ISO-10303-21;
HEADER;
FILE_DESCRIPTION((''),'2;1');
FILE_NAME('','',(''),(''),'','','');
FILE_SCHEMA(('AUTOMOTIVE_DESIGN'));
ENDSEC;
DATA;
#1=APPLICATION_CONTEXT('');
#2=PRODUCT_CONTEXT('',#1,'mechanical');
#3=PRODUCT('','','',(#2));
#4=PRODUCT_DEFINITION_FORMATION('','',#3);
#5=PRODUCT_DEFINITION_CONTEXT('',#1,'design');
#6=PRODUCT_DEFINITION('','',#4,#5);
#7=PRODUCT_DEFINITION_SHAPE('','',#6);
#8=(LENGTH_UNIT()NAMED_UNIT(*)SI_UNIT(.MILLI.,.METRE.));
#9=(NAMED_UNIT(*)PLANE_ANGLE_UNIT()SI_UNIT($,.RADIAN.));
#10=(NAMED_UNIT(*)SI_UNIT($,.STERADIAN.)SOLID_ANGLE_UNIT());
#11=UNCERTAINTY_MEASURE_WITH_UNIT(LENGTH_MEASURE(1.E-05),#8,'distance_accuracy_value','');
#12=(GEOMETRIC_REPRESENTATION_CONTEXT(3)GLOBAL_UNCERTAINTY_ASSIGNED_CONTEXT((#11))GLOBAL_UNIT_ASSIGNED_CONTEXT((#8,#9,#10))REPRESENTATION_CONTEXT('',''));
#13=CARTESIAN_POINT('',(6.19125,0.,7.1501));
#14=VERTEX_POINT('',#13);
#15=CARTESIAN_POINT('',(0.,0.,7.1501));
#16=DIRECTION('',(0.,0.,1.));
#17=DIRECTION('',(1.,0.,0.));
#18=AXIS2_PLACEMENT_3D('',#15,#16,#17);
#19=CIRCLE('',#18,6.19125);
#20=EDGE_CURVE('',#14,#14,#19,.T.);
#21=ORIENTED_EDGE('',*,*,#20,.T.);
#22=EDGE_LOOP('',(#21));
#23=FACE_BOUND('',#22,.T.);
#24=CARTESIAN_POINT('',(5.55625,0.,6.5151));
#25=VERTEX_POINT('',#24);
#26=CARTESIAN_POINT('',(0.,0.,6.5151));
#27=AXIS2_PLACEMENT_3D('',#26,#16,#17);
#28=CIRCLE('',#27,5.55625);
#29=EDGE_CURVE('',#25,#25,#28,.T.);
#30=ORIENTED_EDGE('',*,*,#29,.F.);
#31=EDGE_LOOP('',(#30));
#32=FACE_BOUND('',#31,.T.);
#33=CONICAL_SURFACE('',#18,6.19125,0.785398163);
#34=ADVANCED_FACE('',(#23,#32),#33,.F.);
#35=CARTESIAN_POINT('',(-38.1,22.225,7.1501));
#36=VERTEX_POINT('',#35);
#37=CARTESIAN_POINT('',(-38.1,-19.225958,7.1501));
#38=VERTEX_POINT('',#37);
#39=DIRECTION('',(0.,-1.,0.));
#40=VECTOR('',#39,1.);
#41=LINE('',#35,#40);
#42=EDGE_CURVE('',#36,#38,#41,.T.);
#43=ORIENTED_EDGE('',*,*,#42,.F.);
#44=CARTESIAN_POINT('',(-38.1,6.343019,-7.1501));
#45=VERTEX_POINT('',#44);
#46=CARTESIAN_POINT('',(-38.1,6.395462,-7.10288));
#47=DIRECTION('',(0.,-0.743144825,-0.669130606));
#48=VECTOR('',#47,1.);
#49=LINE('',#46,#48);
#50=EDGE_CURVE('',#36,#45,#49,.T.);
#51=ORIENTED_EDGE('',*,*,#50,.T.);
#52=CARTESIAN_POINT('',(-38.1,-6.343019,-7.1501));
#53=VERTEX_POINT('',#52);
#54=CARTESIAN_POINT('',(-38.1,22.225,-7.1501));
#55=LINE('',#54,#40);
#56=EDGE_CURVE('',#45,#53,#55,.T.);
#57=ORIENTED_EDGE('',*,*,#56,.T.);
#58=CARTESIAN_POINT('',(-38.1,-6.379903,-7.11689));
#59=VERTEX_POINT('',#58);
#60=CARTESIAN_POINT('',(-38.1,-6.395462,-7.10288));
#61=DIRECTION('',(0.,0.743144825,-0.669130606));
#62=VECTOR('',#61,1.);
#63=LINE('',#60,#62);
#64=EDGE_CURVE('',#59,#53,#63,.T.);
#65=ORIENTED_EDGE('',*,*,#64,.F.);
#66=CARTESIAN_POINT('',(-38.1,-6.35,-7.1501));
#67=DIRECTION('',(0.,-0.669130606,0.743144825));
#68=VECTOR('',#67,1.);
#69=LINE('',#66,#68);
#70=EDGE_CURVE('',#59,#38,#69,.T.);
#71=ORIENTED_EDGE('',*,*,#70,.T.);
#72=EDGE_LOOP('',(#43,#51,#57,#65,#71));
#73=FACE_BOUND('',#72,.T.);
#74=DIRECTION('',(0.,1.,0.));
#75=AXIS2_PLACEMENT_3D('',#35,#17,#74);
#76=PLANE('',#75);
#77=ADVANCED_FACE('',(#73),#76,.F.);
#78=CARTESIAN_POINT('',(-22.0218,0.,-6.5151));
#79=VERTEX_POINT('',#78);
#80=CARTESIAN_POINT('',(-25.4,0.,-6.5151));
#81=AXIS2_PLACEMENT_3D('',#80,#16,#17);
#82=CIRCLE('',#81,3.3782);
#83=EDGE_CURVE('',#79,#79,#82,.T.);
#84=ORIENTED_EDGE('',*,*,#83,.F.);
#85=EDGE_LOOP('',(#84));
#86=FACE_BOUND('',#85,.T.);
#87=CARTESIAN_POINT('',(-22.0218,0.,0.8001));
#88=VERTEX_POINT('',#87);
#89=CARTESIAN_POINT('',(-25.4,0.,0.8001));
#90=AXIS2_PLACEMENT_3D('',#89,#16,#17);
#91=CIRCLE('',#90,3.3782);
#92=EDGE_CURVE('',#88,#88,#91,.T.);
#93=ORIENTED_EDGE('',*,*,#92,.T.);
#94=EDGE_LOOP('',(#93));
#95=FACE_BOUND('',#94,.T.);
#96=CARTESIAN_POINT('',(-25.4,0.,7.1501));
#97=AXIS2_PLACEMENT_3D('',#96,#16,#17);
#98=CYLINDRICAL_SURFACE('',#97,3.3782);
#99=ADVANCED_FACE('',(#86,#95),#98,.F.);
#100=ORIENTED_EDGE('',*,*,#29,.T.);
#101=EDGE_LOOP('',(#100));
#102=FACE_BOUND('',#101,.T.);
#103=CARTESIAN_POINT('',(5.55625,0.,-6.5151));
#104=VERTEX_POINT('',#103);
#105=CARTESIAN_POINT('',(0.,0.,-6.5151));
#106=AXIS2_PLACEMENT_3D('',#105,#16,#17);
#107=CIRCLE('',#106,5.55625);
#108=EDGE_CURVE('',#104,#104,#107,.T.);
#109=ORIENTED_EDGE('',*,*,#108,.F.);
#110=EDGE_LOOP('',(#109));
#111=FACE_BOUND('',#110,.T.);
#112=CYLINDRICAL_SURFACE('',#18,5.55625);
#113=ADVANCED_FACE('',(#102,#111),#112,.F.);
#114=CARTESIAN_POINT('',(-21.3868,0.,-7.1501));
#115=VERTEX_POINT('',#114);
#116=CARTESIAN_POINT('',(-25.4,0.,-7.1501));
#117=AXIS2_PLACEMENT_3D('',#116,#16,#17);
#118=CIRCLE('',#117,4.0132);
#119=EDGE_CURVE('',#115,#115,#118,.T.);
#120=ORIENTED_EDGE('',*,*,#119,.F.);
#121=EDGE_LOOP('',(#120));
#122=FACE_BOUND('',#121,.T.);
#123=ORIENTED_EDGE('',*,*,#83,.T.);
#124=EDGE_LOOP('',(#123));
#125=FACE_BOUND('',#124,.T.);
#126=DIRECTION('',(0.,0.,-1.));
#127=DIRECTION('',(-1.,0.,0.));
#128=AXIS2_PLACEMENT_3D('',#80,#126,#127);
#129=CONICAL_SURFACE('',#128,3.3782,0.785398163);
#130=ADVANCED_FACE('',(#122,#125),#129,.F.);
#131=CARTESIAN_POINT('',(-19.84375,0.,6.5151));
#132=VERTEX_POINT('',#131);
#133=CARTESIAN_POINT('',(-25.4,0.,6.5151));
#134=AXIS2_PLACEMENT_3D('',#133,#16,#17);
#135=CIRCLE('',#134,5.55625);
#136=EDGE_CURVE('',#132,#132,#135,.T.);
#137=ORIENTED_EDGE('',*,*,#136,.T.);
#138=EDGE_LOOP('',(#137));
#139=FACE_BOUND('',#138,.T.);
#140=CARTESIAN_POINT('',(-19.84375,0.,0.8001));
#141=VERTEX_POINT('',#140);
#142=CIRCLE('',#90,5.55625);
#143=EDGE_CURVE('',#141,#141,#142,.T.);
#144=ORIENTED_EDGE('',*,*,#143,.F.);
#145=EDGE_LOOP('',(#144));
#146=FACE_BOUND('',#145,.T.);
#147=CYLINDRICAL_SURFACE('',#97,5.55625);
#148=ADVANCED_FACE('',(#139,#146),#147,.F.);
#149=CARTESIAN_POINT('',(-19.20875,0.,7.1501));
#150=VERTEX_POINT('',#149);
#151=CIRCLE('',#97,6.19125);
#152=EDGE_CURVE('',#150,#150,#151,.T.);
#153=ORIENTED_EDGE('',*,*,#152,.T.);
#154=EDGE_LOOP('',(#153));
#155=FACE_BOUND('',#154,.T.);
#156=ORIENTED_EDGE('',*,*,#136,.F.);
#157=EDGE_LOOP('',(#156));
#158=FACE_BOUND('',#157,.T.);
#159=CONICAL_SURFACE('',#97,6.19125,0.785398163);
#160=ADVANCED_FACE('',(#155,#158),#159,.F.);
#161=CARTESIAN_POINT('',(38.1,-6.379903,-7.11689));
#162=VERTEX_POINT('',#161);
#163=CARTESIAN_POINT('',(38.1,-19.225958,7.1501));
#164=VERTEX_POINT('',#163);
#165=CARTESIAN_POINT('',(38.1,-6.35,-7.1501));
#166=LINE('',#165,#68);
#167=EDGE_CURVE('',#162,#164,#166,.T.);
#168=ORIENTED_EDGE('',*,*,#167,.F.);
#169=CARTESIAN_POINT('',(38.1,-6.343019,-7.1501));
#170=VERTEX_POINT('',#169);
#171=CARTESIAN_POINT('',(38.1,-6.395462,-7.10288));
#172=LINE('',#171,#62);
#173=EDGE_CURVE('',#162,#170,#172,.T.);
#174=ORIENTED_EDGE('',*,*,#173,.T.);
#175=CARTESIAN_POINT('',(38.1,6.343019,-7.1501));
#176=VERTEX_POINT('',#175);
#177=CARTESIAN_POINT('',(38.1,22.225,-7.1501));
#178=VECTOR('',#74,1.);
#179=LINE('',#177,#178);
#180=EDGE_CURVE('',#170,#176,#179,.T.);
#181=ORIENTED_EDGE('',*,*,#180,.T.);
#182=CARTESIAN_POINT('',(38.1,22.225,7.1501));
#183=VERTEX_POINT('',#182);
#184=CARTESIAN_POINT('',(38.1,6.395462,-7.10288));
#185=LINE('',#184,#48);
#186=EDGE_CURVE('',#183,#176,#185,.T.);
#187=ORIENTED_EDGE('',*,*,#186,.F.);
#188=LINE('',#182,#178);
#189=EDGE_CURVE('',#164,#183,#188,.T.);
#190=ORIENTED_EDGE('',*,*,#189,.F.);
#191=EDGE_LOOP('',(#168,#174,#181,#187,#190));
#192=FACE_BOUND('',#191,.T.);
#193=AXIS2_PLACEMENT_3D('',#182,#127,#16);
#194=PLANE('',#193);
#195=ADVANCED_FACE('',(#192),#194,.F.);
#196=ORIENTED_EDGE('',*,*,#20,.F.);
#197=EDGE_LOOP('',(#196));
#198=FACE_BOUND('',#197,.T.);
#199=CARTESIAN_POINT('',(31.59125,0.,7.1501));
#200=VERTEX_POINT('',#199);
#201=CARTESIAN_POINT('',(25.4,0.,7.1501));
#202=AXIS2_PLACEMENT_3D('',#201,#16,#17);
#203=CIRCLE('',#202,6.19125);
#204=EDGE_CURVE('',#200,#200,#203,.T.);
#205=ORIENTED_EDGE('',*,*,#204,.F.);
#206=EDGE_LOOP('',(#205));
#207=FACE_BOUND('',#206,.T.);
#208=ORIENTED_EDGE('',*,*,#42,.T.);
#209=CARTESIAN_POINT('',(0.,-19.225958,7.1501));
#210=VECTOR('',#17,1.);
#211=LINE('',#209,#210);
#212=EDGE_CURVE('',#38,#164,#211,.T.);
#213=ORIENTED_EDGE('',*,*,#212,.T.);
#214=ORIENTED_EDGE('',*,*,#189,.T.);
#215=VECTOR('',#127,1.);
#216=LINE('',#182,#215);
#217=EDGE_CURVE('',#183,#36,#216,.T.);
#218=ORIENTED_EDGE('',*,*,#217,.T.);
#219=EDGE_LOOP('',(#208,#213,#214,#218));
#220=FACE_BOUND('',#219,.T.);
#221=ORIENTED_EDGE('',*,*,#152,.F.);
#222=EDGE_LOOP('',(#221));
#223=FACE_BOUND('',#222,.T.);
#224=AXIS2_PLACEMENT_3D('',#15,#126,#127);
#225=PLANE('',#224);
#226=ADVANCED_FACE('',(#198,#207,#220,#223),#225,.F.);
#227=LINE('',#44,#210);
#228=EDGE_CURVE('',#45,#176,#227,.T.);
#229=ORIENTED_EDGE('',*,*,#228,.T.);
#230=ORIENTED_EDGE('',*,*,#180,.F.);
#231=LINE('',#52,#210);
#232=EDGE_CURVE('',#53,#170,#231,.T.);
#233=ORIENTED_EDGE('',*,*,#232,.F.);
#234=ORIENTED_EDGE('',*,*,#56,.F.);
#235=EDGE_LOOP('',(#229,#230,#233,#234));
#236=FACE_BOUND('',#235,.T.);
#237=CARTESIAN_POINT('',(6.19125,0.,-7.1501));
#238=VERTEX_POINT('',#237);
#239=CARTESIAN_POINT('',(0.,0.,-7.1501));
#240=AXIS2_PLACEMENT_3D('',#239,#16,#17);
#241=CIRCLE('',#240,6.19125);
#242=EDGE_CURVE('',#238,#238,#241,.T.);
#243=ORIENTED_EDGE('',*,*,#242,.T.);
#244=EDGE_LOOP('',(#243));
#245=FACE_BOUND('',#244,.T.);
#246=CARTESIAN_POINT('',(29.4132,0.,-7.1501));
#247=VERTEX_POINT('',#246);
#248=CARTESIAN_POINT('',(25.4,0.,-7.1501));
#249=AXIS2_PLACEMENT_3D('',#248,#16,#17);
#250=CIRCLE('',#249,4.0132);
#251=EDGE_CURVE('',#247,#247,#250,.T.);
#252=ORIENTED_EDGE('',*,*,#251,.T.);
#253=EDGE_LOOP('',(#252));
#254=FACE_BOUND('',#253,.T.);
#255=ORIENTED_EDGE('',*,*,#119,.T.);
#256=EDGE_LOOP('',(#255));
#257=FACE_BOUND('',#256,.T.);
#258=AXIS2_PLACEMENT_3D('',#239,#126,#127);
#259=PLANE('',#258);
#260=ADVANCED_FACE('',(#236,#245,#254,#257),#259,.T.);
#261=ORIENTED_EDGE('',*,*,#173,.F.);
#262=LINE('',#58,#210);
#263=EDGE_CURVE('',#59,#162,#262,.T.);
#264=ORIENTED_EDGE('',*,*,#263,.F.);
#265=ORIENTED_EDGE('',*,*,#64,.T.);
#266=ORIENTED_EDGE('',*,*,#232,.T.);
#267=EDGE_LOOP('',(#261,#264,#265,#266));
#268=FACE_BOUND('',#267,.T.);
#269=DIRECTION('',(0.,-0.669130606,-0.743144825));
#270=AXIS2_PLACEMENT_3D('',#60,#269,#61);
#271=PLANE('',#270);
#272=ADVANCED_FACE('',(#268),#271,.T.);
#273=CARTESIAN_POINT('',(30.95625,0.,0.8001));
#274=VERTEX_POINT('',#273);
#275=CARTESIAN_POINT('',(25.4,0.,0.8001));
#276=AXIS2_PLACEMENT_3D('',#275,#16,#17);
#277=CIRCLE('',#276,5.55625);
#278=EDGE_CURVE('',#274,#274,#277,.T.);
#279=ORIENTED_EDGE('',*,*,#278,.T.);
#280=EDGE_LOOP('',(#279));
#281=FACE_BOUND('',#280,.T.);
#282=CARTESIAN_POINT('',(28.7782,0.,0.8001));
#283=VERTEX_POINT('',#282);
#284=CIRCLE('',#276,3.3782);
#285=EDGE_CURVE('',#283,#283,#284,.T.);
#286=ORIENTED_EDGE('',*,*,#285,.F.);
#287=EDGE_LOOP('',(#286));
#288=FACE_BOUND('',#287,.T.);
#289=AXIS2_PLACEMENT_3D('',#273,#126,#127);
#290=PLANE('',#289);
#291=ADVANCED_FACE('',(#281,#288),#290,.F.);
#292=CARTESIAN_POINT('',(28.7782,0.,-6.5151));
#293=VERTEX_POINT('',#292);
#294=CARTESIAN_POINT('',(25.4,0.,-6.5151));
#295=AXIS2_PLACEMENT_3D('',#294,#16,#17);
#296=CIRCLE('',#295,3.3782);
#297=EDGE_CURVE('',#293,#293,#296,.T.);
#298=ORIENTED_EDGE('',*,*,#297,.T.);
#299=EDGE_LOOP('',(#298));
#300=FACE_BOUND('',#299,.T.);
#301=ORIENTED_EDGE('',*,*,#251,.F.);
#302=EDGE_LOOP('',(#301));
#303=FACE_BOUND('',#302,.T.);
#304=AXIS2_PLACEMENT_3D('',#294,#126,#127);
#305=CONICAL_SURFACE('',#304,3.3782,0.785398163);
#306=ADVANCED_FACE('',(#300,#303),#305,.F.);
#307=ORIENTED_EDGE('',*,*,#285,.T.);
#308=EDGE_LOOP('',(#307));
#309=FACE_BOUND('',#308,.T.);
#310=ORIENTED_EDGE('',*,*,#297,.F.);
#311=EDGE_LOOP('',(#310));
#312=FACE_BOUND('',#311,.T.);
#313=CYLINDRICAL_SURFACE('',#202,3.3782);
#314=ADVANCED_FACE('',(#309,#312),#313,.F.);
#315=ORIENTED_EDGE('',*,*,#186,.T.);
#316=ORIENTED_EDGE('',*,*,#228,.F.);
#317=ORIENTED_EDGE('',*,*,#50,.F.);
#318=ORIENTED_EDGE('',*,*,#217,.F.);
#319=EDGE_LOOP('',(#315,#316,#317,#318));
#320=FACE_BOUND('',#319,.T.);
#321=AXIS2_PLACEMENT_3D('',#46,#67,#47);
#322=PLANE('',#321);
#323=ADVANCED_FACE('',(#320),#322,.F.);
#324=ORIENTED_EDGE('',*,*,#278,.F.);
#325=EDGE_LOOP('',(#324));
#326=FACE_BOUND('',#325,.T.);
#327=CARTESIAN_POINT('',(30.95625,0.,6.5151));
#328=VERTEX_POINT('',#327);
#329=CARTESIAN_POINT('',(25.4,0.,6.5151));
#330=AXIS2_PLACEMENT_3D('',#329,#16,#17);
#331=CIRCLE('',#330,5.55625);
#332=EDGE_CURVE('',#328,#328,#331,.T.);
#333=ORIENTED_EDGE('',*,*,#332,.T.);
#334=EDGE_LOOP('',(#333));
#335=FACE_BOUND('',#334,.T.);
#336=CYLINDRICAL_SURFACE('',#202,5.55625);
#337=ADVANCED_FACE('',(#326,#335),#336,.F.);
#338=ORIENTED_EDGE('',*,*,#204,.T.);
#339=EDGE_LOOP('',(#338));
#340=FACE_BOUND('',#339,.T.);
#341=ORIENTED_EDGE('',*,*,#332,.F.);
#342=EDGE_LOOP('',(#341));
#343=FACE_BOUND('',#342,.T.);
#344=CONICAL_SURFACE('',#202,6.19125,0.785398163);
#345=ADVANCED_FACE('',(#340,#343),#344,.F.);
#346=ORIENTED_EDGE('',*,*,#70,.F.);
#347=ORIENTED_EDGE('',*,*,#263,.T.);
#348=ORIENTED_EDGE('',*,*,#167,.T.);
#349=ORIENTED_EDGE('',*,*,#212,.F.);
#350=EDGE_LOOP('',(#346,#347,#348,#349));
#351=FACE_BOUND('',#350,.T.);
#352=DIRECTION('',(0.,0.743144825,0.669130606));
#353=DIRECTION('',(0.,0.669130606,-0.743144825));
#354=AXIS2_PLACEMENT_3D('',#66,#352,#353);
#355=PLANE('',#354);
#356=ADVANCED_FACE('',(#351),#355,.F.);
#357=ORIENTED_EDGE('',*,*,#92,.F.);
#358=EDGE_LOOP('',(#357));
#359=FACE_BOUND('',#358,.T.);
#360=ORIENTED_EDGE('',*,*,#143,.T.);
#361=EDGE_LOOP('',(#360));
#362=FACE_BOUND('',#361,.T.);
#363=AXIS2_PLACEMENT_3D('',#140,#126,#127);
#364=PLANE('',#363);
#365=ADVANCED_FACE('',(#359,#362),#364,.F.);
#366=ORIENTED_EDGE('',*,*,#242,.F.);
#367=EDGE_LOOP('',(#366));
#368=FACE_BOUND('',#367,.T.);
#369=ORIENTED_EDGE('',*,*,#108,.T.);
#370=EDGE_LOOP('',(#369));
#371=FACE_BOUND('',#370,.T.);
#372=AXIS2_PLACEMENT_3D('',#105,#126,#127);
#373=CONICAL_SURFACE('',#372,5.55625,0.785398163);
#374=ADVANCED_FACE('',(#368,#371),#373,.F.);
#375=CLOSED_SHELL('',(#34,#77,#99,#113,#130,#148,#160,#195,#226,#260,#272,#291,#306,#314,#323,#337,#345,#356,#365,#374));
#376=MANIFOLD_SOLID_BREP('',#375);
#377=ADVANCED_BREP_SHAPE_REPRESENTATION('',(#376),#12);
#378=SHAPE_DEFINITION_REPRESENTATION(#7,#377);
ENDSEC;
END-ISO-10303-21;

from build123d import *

# Parameters (mm, degrees)
SKETCH1_W                                     = 76.2
SKETCH1_H                                     = 44.45
BOSS_EXTRUDE1_DEPTH                           = 7.1501
CUT_EXTRUDE1_DEPTH                            = 80.696389849
CBORE_FOR_1_4_SOCKET_HEAD_CAP_SCREW1_AT_COUNT = 2
CBORE_FOR_1_4_SOCKET_HEAD_CAP_SCREW1_AT_PITCH = 50.8
CAVITY1_START                                 = -11.732042998
CAVITY1_OUTLINE_W                             = 78.1
CAVITY1_OUTLINE_H                             = 25
CAVITY1_DEPTH                                 = 2.228722608


# Read off the part's stored shape, not the designer's step: Cavity1
with BuildPart() as part:
    # Sketch1 → Boss-Extrude1 (new, symmetric)
    with BuildSketch(Plane.XY):
        Rectangle(SKETCH1_W, SKETCH1_H)
    extrude(amount=BOSS_EXTRUDE1_DEPTH, both=True)

    # Sketch2 → Cut-Extrude1 (cut, through all)
    with BuildSketch(Plane(origin=(38.1, 0, 0), x_dir=(0, 0, -1), z_dir=(1, 0, 0))):
        Polygon((7.1501, -6.343018915), (-7.1501, -22.225), (7.1501, -22.225), align=None)
        Polygon((-7.1501, 22.225), (7.1501, 6.343018915), (7.1501, 22.225), align=None)
    extrude(amount=-CUT_EXTRUDE1_DEPTH, mode=Mode.SUBTRACT)

    # Sketch6 → CBORE for 1/4 Socket Head Cap Screw1 (revolve, cut)
    with BuildSketch(Plane(origin=(-25.4, 0, 7.1501), x_dir=(0, -1, 0), z_dir=(1, 0, 0))):
        Polygon((0, 0), (0, 14.3002), (4.0132, 14.3002), (3.3782, 13.6652), (3.3782, 6.35), (5.55625, 6.35), (5.55625, 0.635), (6.19125, 0), align=None)
    cbore_for_1_4_socket_head_cap_screw1 = revolve(axis=Axis((-25.4, 0, 13.5001), (0, 0, -1)), mode=Mode.SUBTRACT)

    # CBORE for 1/4 Socket Head Cap Screw1 at: CBORE for 1/4 Socket Head Cap Screw1 ×2
    with Locations(*[(i * CBORE_FOR_1_4_SOCKET_HEAD_CAP_SCREW1_AT_PITCH, 0, 0) for i in range(1, CBORE_FOR_1_4_SOCKET_HEAD_CAP_SCREW1_AT_COUNT)]):
        add(cbore_for_1_4_socket_head_cap_screw1, mode=Mode.SUBTRACT)

    # Sketch8 → 7/16 (0.4375) Diameter Hole1 (revolve, cut)
    with BuildSketch(Plane(origin=(0, 0, 7.1501), x_dir=(0, -1, 0), z_dir=(1, 0, 0))):
        Polygon((0, 0), (0, 14.3002), (6.19125, 14.3002), (5.55625, 13.6652), (5.55625, 0.635), (6.19125, 0), align=None)
    revolve(axis=Axis((0, 0, 13.5001), (0, 0, -1)), mode=Mode.SUBTRACT)

    # Cavity1 outline → Cavity1 (cut)
    with BuildSketch(Plane(origin=(0, 0, 0), x_dir=(1, 0, 0), z_dir=(0, 0.7431448254773938, 0.6691306063588588)).offset(CAVITY1_START)):
        with Locations((-0.95, -9.5)):
            Rectangle(CAVITY1_OUTLINE_W, CAVITY1_OUTLINE_H)
    extrude(amount=CAVITY1_DEPTH, mode=Mode.SUBTRACT)


solid = part.part
